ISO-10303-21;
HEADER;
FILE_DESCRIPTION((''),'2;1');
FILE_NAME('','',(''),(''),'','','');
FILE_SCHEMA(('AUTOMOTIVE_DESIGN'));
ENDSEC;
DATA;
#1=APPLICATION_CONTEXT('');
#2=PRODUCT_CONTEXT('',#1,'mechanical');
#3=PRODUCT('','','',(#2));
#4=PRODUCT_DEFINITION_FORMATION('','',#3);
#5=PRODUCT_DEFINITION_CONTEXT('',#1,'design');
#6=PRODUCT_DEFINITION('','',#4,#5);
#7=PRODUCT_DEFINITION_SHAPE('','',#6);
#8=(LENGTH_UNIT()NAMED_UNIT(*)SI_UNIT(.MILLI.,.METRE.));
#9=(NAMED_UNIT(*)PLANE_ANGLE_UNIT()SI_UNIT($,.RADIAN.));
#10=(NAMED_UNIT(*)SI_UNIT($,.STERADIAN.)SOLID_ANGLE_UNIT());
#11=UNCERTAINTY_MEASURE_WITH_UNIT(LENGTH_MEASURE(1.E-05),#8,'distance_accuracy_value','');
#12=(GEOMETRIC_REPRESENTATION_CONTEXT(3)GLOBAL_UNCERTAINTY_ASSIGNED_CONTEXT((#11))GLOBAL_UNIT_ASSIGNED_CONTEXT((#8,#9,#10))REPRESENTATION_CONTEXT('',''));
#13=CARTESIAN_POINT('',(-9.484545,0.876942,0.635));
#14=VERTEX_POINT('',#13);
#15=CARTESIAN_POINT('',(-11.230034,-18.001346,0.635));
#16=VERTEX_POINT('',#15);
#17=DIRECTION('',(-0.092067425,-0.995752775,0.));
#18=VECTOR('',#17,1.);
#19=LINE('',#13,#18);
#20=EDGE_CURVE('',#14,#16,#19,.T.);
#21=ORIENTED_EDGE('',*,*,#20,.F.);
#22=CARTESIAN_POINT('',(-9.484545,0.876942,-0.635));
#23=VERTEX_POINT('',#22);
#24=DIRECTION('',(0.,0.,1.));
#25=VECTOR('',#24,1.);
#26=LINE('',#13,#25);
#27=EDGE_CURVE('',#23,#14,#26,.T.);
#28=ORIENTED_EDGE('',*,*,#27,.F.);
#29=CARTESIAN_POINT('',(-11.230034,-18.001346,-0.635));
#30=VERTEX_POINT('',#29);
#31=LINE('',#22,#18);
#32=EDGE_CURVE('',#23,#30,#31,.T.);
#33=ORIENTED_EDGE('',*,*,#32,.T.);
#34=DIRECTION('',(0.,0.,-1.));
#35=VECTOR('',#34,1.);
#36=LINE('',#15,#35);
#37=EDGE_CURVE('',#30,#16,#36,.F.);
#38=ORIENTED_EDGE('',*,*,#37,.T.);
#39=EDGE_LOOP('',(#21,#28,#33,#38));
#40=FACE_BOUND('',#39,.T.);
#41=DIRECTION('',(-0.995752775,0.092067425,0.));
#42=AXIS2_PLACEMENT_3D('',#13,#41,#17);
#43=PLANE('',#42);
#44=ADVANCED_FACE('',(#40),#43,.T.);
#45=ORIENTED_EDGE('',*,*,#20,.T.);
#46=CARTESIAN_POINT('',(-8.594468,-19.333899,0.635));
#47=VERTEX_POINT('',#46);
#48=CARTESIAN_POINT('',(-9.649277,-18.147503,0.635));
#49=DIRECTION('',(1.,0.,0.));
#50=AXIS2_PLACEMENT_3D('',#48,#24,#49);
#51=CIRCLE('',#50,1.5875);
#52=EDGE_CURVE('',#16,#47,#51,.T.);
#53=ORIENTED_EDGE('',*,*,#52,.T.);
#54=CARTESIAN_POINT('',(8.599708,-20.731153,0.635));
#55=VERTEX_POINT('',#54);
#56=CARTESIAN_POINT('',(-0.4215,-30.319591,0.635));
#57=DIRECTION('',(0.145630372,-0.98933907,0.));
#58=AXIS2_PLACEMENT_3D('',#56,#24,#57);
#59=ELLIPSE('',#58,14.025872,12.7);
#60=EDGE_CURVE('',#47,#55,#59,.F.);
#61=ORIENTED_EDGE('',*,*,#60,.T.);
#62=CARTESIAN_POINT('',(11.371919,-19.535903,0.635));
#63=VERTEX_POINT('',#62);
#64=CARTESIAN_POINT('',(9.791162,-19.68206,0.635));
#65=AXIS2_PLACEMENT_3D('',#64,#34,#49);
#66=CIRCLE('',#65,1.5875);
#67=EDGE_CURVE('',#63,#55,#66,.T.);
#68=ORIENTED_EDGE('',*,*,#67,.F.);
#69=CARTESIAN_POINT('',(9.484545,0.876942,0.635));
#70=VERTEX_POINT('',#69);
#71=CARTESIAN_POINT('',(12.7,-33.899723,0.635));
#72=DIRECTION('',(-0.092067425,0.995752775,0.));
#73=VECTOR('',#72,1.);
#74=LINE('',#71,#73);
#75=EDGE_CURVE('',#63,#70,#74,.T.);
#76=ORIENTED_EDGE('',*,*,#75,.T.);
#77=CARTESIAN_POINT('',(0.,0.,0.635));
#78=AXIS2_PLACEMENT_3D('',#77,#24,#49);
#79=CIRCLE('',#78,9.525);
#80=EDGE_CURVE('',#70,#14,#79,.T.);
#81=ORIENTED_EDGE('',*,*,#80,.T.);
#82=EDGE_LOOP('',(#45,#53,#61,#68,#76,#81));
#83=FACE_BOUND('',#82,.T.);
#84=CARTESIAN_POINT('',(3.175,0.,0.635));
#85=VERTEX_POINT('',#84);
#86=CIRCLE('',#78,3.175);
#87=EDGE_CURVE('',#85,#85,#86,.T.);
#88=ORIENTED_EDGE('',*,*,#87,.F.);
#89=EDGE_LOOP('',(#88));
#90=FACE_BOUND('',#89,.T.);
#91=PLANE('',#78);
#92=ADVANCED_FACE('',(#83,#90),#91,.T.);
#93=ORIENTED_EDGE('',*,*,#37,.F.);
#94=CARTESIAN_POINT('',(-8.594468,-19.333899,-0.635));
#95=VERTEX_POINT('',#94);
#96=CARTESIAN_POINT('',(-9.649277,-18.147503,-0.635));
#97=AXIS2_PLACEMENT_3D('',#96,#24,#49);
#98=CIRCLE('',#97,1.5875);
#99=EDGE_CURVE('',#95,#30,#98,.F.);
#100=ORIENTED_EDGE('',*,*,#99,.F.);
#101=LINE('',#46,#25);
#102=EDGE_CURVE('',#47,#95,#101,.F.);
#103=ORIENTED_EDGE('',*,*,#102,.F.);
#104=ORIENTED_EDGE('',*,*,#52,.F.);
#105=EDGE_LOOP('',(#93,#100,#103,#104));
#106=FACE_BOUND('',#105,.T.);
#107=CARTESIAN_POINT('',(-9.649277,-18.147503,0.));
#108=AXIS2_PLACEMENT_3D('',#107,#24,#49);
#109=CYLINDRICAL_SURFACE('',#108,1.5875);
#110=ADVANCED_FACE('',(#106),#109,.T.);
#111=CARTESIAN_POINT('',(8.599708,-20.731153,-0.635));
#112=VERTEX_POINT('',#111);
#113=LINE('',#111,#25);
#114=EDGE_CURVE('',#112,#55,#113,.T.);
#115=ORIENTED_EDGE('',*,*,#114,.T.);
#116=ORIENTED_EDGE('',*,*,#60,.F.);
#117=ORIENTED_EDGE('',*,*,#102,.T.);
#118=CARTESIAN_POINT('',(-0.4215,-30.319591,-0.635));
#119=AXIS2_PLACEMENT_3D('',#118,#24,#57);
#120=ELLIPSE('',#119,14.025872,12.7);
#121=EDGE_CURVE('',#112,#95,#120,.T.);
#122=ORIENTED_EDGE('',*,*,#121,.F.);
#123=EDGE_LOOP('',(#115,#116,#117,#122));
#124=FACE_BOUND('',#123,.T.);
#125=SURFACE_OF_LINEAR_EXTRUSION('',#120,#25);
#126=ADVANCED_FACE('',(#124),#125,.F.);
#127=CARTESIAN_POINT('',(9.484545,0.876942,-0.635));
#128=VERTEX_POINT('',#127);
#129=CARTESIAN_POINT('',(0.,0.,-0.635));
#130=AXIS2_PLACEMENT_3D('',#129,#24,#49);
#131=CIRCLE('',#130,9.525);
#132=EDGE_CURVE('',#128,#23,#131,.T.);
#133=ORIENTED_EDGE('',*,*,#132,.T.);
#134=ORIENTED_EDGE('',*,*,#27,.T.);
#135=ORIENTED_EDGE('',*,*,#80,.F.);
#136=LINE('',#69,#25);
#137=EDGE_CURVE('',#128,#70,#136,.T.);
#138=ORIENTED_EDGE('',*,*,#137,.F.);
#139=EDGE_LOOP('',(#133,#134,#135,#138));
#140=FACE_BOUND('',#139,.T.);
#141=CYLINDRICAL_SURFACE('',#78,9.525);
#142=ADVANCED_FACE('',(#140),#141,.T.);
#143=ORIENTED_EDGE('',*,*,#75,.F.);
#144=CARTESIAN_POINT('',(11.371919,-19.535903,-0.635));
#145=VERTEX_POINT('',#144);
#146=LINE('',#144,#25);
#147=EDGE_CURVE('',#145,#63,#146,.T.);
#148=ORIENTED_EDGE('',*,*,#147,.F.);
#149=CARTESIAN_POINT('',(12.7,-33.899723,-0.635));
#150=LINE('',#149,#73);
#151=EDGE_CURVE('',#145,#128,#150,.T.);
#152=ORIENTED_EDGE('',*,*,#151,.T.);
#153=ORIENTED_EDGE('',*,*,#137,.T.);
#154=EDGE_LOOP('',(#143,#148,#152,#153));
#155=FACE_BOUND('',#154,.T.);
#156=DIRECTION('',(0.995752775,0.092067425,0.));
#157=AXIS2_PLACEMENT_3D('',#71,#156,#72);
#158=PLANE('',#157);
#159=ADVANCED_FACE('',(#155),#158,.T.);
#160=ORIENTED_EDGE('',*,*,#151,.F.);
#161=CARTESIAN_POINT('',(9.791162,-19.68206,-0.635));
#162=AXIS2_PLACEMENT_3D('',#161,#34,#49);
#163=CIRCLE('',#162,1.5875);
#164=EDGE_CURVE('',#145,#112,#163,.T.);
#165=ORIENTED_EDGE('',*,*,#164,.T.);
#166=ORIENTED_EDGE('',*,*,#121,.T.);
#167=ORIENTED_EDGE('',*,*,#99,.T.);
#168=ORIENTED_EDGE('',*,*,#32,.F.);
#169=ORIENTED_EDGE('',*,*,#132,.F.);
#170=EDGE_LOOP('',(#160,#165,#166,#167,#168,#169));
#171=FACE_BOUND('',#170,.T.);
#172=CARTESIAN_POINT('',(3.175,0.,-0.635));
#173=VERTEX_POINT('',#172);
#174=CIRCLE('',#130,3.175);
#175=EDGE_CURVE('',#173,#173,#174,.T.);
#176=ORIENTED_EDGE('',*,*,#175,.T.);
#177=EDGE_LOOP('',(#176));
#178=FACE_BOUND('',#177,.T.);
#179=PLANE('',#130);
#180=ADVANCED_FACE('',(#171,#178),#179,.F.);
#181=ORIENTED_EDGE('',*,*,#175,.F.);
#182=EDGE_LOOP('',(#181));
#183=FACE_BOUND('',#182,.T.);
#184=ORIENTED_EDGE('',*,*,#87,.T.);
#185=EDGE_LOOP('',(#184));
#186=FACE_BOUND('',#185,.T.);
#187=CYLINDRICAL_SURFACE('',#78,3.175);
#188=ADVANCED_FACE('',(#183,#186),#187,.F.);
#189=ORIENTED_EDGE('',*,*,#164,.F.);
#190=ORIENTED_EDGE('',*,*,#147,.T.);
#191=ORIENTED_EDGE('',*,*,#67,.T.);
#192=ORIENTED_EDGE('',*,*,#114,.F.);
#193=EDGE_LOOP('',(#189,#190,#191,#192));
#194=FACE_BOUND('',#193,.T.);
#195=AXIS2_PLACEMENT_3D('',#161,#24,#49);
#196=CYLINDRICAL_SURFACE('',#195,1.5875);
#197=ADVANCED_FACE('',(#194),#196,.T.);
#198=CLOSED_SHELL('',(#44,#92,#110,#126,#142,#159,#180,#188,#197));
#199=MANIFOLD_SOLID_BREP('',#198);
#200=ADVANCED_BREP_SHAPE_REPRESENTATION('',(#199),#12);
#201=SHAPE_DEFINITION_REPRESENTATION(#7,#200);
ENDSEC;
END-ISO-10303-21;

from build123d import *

# Parameters (mm, degrees)
SKETCH1_R           = 3.175
BOSS_EXTRUDE1_DEPTH = 0.635
SKETCH2_R           = 12.7
CUT_EXTRUDE4_DEPTH  = 212.524238452
CUT_EXTRUDE5_DEPTH  = 37.22284017
FILLET1_R           = 1.5875


with BuildPart() as part:
    # Sketch1 → Boss-Extrude1 (new, symmetric)
    with BuildSketch(Plane.XY):
        with BuildLine():
            Line((-9.484545184, 0.876942223), (-12.7, -33.89972345))
            Line((-12.7, -33.89972345), (12.7, -33.89972345))
            Line((12.7, -33.89972345), (9.484545184, 0.876942223))
            ThreePointArc((9.484545184, 0.876942223), (0, 9.525), (-9.484545184, 0.876942223))
        make_face()
        Circle(SKETCH1_R, mode=Mode.SUBTRACT)
    extrude(amount=BOSS_EXTRUDE1_DEPTH, both=True)

    # Sketch2 → Cut-Extrude4 (cut, through all)
    with BuildSketch(Plane(origin=(11.360273025, -110.358999973, -171.966950351), x_dir=(0.9980881037002614, 0.025903655155534222, 0.05611718009308436), z_dir=(-0.06180716474340577, 0.4198866087842844, 0.9054695523042258))):
        Circle(SKETCH2_R)
    extrude(amount=CUT_EXTRUDE4_DEPTH, mode=Mode.SUBTRACT)


with BuildPart() as cut_extrude4_kept_piece:
    # of the separate pieces the step leaves, the one the design keeps (cut_extrude4_pieces_kept)
    add(part.part.solids().sort_by_distance((-9.484545184, 0.876942223, 0.635))[0])

    # Sketch3 → Cut-Extrude5 (cut, through all)
    with BuildSketch(Plane.XY.offset(0.635)):
        with BuildLine():
            Line((-11.744890387, -23.569760946), (-12.986106665, -32.169096948))
            Line((-12.986106665, -32.169096948), (12.819749994, -35.194876316))
            Line((12.819749994, -35.194876316), (11.371919396, -19.535903157))
            ThreePointArc((11.371919396, -19.535903157), (10.419687683, -21.139836428), (8.599708374, -20.731152577))
            add(Edge.make_bspline(
                [(8.599708374, -20.731152577), (-3.74867157, -6.707106034), (-11.744890387, -23.569760946)],
                knots=[2.192806487, 2.192806487, 2.192806487, 4.076762859, 4.076762859, 4.076762859], degree=2, weights=[1, 0.588189372, 1]))
        make_face()
    extrude(amount=-CUT_EXTRUDE5_DEPTH, mode=Mode.SUBTRACT)

    # Fillet1
    fillet1_edges = [cut_extrude4_kept_piece.edges().sort_by_distance(p)[0] for p in [
        (-11.744890387, -23.569760946, 0),
    ]]
    fillet(fillet1_edges, radius=FILLET1_R)


solid = cut_extrude4_kept_piece.part
